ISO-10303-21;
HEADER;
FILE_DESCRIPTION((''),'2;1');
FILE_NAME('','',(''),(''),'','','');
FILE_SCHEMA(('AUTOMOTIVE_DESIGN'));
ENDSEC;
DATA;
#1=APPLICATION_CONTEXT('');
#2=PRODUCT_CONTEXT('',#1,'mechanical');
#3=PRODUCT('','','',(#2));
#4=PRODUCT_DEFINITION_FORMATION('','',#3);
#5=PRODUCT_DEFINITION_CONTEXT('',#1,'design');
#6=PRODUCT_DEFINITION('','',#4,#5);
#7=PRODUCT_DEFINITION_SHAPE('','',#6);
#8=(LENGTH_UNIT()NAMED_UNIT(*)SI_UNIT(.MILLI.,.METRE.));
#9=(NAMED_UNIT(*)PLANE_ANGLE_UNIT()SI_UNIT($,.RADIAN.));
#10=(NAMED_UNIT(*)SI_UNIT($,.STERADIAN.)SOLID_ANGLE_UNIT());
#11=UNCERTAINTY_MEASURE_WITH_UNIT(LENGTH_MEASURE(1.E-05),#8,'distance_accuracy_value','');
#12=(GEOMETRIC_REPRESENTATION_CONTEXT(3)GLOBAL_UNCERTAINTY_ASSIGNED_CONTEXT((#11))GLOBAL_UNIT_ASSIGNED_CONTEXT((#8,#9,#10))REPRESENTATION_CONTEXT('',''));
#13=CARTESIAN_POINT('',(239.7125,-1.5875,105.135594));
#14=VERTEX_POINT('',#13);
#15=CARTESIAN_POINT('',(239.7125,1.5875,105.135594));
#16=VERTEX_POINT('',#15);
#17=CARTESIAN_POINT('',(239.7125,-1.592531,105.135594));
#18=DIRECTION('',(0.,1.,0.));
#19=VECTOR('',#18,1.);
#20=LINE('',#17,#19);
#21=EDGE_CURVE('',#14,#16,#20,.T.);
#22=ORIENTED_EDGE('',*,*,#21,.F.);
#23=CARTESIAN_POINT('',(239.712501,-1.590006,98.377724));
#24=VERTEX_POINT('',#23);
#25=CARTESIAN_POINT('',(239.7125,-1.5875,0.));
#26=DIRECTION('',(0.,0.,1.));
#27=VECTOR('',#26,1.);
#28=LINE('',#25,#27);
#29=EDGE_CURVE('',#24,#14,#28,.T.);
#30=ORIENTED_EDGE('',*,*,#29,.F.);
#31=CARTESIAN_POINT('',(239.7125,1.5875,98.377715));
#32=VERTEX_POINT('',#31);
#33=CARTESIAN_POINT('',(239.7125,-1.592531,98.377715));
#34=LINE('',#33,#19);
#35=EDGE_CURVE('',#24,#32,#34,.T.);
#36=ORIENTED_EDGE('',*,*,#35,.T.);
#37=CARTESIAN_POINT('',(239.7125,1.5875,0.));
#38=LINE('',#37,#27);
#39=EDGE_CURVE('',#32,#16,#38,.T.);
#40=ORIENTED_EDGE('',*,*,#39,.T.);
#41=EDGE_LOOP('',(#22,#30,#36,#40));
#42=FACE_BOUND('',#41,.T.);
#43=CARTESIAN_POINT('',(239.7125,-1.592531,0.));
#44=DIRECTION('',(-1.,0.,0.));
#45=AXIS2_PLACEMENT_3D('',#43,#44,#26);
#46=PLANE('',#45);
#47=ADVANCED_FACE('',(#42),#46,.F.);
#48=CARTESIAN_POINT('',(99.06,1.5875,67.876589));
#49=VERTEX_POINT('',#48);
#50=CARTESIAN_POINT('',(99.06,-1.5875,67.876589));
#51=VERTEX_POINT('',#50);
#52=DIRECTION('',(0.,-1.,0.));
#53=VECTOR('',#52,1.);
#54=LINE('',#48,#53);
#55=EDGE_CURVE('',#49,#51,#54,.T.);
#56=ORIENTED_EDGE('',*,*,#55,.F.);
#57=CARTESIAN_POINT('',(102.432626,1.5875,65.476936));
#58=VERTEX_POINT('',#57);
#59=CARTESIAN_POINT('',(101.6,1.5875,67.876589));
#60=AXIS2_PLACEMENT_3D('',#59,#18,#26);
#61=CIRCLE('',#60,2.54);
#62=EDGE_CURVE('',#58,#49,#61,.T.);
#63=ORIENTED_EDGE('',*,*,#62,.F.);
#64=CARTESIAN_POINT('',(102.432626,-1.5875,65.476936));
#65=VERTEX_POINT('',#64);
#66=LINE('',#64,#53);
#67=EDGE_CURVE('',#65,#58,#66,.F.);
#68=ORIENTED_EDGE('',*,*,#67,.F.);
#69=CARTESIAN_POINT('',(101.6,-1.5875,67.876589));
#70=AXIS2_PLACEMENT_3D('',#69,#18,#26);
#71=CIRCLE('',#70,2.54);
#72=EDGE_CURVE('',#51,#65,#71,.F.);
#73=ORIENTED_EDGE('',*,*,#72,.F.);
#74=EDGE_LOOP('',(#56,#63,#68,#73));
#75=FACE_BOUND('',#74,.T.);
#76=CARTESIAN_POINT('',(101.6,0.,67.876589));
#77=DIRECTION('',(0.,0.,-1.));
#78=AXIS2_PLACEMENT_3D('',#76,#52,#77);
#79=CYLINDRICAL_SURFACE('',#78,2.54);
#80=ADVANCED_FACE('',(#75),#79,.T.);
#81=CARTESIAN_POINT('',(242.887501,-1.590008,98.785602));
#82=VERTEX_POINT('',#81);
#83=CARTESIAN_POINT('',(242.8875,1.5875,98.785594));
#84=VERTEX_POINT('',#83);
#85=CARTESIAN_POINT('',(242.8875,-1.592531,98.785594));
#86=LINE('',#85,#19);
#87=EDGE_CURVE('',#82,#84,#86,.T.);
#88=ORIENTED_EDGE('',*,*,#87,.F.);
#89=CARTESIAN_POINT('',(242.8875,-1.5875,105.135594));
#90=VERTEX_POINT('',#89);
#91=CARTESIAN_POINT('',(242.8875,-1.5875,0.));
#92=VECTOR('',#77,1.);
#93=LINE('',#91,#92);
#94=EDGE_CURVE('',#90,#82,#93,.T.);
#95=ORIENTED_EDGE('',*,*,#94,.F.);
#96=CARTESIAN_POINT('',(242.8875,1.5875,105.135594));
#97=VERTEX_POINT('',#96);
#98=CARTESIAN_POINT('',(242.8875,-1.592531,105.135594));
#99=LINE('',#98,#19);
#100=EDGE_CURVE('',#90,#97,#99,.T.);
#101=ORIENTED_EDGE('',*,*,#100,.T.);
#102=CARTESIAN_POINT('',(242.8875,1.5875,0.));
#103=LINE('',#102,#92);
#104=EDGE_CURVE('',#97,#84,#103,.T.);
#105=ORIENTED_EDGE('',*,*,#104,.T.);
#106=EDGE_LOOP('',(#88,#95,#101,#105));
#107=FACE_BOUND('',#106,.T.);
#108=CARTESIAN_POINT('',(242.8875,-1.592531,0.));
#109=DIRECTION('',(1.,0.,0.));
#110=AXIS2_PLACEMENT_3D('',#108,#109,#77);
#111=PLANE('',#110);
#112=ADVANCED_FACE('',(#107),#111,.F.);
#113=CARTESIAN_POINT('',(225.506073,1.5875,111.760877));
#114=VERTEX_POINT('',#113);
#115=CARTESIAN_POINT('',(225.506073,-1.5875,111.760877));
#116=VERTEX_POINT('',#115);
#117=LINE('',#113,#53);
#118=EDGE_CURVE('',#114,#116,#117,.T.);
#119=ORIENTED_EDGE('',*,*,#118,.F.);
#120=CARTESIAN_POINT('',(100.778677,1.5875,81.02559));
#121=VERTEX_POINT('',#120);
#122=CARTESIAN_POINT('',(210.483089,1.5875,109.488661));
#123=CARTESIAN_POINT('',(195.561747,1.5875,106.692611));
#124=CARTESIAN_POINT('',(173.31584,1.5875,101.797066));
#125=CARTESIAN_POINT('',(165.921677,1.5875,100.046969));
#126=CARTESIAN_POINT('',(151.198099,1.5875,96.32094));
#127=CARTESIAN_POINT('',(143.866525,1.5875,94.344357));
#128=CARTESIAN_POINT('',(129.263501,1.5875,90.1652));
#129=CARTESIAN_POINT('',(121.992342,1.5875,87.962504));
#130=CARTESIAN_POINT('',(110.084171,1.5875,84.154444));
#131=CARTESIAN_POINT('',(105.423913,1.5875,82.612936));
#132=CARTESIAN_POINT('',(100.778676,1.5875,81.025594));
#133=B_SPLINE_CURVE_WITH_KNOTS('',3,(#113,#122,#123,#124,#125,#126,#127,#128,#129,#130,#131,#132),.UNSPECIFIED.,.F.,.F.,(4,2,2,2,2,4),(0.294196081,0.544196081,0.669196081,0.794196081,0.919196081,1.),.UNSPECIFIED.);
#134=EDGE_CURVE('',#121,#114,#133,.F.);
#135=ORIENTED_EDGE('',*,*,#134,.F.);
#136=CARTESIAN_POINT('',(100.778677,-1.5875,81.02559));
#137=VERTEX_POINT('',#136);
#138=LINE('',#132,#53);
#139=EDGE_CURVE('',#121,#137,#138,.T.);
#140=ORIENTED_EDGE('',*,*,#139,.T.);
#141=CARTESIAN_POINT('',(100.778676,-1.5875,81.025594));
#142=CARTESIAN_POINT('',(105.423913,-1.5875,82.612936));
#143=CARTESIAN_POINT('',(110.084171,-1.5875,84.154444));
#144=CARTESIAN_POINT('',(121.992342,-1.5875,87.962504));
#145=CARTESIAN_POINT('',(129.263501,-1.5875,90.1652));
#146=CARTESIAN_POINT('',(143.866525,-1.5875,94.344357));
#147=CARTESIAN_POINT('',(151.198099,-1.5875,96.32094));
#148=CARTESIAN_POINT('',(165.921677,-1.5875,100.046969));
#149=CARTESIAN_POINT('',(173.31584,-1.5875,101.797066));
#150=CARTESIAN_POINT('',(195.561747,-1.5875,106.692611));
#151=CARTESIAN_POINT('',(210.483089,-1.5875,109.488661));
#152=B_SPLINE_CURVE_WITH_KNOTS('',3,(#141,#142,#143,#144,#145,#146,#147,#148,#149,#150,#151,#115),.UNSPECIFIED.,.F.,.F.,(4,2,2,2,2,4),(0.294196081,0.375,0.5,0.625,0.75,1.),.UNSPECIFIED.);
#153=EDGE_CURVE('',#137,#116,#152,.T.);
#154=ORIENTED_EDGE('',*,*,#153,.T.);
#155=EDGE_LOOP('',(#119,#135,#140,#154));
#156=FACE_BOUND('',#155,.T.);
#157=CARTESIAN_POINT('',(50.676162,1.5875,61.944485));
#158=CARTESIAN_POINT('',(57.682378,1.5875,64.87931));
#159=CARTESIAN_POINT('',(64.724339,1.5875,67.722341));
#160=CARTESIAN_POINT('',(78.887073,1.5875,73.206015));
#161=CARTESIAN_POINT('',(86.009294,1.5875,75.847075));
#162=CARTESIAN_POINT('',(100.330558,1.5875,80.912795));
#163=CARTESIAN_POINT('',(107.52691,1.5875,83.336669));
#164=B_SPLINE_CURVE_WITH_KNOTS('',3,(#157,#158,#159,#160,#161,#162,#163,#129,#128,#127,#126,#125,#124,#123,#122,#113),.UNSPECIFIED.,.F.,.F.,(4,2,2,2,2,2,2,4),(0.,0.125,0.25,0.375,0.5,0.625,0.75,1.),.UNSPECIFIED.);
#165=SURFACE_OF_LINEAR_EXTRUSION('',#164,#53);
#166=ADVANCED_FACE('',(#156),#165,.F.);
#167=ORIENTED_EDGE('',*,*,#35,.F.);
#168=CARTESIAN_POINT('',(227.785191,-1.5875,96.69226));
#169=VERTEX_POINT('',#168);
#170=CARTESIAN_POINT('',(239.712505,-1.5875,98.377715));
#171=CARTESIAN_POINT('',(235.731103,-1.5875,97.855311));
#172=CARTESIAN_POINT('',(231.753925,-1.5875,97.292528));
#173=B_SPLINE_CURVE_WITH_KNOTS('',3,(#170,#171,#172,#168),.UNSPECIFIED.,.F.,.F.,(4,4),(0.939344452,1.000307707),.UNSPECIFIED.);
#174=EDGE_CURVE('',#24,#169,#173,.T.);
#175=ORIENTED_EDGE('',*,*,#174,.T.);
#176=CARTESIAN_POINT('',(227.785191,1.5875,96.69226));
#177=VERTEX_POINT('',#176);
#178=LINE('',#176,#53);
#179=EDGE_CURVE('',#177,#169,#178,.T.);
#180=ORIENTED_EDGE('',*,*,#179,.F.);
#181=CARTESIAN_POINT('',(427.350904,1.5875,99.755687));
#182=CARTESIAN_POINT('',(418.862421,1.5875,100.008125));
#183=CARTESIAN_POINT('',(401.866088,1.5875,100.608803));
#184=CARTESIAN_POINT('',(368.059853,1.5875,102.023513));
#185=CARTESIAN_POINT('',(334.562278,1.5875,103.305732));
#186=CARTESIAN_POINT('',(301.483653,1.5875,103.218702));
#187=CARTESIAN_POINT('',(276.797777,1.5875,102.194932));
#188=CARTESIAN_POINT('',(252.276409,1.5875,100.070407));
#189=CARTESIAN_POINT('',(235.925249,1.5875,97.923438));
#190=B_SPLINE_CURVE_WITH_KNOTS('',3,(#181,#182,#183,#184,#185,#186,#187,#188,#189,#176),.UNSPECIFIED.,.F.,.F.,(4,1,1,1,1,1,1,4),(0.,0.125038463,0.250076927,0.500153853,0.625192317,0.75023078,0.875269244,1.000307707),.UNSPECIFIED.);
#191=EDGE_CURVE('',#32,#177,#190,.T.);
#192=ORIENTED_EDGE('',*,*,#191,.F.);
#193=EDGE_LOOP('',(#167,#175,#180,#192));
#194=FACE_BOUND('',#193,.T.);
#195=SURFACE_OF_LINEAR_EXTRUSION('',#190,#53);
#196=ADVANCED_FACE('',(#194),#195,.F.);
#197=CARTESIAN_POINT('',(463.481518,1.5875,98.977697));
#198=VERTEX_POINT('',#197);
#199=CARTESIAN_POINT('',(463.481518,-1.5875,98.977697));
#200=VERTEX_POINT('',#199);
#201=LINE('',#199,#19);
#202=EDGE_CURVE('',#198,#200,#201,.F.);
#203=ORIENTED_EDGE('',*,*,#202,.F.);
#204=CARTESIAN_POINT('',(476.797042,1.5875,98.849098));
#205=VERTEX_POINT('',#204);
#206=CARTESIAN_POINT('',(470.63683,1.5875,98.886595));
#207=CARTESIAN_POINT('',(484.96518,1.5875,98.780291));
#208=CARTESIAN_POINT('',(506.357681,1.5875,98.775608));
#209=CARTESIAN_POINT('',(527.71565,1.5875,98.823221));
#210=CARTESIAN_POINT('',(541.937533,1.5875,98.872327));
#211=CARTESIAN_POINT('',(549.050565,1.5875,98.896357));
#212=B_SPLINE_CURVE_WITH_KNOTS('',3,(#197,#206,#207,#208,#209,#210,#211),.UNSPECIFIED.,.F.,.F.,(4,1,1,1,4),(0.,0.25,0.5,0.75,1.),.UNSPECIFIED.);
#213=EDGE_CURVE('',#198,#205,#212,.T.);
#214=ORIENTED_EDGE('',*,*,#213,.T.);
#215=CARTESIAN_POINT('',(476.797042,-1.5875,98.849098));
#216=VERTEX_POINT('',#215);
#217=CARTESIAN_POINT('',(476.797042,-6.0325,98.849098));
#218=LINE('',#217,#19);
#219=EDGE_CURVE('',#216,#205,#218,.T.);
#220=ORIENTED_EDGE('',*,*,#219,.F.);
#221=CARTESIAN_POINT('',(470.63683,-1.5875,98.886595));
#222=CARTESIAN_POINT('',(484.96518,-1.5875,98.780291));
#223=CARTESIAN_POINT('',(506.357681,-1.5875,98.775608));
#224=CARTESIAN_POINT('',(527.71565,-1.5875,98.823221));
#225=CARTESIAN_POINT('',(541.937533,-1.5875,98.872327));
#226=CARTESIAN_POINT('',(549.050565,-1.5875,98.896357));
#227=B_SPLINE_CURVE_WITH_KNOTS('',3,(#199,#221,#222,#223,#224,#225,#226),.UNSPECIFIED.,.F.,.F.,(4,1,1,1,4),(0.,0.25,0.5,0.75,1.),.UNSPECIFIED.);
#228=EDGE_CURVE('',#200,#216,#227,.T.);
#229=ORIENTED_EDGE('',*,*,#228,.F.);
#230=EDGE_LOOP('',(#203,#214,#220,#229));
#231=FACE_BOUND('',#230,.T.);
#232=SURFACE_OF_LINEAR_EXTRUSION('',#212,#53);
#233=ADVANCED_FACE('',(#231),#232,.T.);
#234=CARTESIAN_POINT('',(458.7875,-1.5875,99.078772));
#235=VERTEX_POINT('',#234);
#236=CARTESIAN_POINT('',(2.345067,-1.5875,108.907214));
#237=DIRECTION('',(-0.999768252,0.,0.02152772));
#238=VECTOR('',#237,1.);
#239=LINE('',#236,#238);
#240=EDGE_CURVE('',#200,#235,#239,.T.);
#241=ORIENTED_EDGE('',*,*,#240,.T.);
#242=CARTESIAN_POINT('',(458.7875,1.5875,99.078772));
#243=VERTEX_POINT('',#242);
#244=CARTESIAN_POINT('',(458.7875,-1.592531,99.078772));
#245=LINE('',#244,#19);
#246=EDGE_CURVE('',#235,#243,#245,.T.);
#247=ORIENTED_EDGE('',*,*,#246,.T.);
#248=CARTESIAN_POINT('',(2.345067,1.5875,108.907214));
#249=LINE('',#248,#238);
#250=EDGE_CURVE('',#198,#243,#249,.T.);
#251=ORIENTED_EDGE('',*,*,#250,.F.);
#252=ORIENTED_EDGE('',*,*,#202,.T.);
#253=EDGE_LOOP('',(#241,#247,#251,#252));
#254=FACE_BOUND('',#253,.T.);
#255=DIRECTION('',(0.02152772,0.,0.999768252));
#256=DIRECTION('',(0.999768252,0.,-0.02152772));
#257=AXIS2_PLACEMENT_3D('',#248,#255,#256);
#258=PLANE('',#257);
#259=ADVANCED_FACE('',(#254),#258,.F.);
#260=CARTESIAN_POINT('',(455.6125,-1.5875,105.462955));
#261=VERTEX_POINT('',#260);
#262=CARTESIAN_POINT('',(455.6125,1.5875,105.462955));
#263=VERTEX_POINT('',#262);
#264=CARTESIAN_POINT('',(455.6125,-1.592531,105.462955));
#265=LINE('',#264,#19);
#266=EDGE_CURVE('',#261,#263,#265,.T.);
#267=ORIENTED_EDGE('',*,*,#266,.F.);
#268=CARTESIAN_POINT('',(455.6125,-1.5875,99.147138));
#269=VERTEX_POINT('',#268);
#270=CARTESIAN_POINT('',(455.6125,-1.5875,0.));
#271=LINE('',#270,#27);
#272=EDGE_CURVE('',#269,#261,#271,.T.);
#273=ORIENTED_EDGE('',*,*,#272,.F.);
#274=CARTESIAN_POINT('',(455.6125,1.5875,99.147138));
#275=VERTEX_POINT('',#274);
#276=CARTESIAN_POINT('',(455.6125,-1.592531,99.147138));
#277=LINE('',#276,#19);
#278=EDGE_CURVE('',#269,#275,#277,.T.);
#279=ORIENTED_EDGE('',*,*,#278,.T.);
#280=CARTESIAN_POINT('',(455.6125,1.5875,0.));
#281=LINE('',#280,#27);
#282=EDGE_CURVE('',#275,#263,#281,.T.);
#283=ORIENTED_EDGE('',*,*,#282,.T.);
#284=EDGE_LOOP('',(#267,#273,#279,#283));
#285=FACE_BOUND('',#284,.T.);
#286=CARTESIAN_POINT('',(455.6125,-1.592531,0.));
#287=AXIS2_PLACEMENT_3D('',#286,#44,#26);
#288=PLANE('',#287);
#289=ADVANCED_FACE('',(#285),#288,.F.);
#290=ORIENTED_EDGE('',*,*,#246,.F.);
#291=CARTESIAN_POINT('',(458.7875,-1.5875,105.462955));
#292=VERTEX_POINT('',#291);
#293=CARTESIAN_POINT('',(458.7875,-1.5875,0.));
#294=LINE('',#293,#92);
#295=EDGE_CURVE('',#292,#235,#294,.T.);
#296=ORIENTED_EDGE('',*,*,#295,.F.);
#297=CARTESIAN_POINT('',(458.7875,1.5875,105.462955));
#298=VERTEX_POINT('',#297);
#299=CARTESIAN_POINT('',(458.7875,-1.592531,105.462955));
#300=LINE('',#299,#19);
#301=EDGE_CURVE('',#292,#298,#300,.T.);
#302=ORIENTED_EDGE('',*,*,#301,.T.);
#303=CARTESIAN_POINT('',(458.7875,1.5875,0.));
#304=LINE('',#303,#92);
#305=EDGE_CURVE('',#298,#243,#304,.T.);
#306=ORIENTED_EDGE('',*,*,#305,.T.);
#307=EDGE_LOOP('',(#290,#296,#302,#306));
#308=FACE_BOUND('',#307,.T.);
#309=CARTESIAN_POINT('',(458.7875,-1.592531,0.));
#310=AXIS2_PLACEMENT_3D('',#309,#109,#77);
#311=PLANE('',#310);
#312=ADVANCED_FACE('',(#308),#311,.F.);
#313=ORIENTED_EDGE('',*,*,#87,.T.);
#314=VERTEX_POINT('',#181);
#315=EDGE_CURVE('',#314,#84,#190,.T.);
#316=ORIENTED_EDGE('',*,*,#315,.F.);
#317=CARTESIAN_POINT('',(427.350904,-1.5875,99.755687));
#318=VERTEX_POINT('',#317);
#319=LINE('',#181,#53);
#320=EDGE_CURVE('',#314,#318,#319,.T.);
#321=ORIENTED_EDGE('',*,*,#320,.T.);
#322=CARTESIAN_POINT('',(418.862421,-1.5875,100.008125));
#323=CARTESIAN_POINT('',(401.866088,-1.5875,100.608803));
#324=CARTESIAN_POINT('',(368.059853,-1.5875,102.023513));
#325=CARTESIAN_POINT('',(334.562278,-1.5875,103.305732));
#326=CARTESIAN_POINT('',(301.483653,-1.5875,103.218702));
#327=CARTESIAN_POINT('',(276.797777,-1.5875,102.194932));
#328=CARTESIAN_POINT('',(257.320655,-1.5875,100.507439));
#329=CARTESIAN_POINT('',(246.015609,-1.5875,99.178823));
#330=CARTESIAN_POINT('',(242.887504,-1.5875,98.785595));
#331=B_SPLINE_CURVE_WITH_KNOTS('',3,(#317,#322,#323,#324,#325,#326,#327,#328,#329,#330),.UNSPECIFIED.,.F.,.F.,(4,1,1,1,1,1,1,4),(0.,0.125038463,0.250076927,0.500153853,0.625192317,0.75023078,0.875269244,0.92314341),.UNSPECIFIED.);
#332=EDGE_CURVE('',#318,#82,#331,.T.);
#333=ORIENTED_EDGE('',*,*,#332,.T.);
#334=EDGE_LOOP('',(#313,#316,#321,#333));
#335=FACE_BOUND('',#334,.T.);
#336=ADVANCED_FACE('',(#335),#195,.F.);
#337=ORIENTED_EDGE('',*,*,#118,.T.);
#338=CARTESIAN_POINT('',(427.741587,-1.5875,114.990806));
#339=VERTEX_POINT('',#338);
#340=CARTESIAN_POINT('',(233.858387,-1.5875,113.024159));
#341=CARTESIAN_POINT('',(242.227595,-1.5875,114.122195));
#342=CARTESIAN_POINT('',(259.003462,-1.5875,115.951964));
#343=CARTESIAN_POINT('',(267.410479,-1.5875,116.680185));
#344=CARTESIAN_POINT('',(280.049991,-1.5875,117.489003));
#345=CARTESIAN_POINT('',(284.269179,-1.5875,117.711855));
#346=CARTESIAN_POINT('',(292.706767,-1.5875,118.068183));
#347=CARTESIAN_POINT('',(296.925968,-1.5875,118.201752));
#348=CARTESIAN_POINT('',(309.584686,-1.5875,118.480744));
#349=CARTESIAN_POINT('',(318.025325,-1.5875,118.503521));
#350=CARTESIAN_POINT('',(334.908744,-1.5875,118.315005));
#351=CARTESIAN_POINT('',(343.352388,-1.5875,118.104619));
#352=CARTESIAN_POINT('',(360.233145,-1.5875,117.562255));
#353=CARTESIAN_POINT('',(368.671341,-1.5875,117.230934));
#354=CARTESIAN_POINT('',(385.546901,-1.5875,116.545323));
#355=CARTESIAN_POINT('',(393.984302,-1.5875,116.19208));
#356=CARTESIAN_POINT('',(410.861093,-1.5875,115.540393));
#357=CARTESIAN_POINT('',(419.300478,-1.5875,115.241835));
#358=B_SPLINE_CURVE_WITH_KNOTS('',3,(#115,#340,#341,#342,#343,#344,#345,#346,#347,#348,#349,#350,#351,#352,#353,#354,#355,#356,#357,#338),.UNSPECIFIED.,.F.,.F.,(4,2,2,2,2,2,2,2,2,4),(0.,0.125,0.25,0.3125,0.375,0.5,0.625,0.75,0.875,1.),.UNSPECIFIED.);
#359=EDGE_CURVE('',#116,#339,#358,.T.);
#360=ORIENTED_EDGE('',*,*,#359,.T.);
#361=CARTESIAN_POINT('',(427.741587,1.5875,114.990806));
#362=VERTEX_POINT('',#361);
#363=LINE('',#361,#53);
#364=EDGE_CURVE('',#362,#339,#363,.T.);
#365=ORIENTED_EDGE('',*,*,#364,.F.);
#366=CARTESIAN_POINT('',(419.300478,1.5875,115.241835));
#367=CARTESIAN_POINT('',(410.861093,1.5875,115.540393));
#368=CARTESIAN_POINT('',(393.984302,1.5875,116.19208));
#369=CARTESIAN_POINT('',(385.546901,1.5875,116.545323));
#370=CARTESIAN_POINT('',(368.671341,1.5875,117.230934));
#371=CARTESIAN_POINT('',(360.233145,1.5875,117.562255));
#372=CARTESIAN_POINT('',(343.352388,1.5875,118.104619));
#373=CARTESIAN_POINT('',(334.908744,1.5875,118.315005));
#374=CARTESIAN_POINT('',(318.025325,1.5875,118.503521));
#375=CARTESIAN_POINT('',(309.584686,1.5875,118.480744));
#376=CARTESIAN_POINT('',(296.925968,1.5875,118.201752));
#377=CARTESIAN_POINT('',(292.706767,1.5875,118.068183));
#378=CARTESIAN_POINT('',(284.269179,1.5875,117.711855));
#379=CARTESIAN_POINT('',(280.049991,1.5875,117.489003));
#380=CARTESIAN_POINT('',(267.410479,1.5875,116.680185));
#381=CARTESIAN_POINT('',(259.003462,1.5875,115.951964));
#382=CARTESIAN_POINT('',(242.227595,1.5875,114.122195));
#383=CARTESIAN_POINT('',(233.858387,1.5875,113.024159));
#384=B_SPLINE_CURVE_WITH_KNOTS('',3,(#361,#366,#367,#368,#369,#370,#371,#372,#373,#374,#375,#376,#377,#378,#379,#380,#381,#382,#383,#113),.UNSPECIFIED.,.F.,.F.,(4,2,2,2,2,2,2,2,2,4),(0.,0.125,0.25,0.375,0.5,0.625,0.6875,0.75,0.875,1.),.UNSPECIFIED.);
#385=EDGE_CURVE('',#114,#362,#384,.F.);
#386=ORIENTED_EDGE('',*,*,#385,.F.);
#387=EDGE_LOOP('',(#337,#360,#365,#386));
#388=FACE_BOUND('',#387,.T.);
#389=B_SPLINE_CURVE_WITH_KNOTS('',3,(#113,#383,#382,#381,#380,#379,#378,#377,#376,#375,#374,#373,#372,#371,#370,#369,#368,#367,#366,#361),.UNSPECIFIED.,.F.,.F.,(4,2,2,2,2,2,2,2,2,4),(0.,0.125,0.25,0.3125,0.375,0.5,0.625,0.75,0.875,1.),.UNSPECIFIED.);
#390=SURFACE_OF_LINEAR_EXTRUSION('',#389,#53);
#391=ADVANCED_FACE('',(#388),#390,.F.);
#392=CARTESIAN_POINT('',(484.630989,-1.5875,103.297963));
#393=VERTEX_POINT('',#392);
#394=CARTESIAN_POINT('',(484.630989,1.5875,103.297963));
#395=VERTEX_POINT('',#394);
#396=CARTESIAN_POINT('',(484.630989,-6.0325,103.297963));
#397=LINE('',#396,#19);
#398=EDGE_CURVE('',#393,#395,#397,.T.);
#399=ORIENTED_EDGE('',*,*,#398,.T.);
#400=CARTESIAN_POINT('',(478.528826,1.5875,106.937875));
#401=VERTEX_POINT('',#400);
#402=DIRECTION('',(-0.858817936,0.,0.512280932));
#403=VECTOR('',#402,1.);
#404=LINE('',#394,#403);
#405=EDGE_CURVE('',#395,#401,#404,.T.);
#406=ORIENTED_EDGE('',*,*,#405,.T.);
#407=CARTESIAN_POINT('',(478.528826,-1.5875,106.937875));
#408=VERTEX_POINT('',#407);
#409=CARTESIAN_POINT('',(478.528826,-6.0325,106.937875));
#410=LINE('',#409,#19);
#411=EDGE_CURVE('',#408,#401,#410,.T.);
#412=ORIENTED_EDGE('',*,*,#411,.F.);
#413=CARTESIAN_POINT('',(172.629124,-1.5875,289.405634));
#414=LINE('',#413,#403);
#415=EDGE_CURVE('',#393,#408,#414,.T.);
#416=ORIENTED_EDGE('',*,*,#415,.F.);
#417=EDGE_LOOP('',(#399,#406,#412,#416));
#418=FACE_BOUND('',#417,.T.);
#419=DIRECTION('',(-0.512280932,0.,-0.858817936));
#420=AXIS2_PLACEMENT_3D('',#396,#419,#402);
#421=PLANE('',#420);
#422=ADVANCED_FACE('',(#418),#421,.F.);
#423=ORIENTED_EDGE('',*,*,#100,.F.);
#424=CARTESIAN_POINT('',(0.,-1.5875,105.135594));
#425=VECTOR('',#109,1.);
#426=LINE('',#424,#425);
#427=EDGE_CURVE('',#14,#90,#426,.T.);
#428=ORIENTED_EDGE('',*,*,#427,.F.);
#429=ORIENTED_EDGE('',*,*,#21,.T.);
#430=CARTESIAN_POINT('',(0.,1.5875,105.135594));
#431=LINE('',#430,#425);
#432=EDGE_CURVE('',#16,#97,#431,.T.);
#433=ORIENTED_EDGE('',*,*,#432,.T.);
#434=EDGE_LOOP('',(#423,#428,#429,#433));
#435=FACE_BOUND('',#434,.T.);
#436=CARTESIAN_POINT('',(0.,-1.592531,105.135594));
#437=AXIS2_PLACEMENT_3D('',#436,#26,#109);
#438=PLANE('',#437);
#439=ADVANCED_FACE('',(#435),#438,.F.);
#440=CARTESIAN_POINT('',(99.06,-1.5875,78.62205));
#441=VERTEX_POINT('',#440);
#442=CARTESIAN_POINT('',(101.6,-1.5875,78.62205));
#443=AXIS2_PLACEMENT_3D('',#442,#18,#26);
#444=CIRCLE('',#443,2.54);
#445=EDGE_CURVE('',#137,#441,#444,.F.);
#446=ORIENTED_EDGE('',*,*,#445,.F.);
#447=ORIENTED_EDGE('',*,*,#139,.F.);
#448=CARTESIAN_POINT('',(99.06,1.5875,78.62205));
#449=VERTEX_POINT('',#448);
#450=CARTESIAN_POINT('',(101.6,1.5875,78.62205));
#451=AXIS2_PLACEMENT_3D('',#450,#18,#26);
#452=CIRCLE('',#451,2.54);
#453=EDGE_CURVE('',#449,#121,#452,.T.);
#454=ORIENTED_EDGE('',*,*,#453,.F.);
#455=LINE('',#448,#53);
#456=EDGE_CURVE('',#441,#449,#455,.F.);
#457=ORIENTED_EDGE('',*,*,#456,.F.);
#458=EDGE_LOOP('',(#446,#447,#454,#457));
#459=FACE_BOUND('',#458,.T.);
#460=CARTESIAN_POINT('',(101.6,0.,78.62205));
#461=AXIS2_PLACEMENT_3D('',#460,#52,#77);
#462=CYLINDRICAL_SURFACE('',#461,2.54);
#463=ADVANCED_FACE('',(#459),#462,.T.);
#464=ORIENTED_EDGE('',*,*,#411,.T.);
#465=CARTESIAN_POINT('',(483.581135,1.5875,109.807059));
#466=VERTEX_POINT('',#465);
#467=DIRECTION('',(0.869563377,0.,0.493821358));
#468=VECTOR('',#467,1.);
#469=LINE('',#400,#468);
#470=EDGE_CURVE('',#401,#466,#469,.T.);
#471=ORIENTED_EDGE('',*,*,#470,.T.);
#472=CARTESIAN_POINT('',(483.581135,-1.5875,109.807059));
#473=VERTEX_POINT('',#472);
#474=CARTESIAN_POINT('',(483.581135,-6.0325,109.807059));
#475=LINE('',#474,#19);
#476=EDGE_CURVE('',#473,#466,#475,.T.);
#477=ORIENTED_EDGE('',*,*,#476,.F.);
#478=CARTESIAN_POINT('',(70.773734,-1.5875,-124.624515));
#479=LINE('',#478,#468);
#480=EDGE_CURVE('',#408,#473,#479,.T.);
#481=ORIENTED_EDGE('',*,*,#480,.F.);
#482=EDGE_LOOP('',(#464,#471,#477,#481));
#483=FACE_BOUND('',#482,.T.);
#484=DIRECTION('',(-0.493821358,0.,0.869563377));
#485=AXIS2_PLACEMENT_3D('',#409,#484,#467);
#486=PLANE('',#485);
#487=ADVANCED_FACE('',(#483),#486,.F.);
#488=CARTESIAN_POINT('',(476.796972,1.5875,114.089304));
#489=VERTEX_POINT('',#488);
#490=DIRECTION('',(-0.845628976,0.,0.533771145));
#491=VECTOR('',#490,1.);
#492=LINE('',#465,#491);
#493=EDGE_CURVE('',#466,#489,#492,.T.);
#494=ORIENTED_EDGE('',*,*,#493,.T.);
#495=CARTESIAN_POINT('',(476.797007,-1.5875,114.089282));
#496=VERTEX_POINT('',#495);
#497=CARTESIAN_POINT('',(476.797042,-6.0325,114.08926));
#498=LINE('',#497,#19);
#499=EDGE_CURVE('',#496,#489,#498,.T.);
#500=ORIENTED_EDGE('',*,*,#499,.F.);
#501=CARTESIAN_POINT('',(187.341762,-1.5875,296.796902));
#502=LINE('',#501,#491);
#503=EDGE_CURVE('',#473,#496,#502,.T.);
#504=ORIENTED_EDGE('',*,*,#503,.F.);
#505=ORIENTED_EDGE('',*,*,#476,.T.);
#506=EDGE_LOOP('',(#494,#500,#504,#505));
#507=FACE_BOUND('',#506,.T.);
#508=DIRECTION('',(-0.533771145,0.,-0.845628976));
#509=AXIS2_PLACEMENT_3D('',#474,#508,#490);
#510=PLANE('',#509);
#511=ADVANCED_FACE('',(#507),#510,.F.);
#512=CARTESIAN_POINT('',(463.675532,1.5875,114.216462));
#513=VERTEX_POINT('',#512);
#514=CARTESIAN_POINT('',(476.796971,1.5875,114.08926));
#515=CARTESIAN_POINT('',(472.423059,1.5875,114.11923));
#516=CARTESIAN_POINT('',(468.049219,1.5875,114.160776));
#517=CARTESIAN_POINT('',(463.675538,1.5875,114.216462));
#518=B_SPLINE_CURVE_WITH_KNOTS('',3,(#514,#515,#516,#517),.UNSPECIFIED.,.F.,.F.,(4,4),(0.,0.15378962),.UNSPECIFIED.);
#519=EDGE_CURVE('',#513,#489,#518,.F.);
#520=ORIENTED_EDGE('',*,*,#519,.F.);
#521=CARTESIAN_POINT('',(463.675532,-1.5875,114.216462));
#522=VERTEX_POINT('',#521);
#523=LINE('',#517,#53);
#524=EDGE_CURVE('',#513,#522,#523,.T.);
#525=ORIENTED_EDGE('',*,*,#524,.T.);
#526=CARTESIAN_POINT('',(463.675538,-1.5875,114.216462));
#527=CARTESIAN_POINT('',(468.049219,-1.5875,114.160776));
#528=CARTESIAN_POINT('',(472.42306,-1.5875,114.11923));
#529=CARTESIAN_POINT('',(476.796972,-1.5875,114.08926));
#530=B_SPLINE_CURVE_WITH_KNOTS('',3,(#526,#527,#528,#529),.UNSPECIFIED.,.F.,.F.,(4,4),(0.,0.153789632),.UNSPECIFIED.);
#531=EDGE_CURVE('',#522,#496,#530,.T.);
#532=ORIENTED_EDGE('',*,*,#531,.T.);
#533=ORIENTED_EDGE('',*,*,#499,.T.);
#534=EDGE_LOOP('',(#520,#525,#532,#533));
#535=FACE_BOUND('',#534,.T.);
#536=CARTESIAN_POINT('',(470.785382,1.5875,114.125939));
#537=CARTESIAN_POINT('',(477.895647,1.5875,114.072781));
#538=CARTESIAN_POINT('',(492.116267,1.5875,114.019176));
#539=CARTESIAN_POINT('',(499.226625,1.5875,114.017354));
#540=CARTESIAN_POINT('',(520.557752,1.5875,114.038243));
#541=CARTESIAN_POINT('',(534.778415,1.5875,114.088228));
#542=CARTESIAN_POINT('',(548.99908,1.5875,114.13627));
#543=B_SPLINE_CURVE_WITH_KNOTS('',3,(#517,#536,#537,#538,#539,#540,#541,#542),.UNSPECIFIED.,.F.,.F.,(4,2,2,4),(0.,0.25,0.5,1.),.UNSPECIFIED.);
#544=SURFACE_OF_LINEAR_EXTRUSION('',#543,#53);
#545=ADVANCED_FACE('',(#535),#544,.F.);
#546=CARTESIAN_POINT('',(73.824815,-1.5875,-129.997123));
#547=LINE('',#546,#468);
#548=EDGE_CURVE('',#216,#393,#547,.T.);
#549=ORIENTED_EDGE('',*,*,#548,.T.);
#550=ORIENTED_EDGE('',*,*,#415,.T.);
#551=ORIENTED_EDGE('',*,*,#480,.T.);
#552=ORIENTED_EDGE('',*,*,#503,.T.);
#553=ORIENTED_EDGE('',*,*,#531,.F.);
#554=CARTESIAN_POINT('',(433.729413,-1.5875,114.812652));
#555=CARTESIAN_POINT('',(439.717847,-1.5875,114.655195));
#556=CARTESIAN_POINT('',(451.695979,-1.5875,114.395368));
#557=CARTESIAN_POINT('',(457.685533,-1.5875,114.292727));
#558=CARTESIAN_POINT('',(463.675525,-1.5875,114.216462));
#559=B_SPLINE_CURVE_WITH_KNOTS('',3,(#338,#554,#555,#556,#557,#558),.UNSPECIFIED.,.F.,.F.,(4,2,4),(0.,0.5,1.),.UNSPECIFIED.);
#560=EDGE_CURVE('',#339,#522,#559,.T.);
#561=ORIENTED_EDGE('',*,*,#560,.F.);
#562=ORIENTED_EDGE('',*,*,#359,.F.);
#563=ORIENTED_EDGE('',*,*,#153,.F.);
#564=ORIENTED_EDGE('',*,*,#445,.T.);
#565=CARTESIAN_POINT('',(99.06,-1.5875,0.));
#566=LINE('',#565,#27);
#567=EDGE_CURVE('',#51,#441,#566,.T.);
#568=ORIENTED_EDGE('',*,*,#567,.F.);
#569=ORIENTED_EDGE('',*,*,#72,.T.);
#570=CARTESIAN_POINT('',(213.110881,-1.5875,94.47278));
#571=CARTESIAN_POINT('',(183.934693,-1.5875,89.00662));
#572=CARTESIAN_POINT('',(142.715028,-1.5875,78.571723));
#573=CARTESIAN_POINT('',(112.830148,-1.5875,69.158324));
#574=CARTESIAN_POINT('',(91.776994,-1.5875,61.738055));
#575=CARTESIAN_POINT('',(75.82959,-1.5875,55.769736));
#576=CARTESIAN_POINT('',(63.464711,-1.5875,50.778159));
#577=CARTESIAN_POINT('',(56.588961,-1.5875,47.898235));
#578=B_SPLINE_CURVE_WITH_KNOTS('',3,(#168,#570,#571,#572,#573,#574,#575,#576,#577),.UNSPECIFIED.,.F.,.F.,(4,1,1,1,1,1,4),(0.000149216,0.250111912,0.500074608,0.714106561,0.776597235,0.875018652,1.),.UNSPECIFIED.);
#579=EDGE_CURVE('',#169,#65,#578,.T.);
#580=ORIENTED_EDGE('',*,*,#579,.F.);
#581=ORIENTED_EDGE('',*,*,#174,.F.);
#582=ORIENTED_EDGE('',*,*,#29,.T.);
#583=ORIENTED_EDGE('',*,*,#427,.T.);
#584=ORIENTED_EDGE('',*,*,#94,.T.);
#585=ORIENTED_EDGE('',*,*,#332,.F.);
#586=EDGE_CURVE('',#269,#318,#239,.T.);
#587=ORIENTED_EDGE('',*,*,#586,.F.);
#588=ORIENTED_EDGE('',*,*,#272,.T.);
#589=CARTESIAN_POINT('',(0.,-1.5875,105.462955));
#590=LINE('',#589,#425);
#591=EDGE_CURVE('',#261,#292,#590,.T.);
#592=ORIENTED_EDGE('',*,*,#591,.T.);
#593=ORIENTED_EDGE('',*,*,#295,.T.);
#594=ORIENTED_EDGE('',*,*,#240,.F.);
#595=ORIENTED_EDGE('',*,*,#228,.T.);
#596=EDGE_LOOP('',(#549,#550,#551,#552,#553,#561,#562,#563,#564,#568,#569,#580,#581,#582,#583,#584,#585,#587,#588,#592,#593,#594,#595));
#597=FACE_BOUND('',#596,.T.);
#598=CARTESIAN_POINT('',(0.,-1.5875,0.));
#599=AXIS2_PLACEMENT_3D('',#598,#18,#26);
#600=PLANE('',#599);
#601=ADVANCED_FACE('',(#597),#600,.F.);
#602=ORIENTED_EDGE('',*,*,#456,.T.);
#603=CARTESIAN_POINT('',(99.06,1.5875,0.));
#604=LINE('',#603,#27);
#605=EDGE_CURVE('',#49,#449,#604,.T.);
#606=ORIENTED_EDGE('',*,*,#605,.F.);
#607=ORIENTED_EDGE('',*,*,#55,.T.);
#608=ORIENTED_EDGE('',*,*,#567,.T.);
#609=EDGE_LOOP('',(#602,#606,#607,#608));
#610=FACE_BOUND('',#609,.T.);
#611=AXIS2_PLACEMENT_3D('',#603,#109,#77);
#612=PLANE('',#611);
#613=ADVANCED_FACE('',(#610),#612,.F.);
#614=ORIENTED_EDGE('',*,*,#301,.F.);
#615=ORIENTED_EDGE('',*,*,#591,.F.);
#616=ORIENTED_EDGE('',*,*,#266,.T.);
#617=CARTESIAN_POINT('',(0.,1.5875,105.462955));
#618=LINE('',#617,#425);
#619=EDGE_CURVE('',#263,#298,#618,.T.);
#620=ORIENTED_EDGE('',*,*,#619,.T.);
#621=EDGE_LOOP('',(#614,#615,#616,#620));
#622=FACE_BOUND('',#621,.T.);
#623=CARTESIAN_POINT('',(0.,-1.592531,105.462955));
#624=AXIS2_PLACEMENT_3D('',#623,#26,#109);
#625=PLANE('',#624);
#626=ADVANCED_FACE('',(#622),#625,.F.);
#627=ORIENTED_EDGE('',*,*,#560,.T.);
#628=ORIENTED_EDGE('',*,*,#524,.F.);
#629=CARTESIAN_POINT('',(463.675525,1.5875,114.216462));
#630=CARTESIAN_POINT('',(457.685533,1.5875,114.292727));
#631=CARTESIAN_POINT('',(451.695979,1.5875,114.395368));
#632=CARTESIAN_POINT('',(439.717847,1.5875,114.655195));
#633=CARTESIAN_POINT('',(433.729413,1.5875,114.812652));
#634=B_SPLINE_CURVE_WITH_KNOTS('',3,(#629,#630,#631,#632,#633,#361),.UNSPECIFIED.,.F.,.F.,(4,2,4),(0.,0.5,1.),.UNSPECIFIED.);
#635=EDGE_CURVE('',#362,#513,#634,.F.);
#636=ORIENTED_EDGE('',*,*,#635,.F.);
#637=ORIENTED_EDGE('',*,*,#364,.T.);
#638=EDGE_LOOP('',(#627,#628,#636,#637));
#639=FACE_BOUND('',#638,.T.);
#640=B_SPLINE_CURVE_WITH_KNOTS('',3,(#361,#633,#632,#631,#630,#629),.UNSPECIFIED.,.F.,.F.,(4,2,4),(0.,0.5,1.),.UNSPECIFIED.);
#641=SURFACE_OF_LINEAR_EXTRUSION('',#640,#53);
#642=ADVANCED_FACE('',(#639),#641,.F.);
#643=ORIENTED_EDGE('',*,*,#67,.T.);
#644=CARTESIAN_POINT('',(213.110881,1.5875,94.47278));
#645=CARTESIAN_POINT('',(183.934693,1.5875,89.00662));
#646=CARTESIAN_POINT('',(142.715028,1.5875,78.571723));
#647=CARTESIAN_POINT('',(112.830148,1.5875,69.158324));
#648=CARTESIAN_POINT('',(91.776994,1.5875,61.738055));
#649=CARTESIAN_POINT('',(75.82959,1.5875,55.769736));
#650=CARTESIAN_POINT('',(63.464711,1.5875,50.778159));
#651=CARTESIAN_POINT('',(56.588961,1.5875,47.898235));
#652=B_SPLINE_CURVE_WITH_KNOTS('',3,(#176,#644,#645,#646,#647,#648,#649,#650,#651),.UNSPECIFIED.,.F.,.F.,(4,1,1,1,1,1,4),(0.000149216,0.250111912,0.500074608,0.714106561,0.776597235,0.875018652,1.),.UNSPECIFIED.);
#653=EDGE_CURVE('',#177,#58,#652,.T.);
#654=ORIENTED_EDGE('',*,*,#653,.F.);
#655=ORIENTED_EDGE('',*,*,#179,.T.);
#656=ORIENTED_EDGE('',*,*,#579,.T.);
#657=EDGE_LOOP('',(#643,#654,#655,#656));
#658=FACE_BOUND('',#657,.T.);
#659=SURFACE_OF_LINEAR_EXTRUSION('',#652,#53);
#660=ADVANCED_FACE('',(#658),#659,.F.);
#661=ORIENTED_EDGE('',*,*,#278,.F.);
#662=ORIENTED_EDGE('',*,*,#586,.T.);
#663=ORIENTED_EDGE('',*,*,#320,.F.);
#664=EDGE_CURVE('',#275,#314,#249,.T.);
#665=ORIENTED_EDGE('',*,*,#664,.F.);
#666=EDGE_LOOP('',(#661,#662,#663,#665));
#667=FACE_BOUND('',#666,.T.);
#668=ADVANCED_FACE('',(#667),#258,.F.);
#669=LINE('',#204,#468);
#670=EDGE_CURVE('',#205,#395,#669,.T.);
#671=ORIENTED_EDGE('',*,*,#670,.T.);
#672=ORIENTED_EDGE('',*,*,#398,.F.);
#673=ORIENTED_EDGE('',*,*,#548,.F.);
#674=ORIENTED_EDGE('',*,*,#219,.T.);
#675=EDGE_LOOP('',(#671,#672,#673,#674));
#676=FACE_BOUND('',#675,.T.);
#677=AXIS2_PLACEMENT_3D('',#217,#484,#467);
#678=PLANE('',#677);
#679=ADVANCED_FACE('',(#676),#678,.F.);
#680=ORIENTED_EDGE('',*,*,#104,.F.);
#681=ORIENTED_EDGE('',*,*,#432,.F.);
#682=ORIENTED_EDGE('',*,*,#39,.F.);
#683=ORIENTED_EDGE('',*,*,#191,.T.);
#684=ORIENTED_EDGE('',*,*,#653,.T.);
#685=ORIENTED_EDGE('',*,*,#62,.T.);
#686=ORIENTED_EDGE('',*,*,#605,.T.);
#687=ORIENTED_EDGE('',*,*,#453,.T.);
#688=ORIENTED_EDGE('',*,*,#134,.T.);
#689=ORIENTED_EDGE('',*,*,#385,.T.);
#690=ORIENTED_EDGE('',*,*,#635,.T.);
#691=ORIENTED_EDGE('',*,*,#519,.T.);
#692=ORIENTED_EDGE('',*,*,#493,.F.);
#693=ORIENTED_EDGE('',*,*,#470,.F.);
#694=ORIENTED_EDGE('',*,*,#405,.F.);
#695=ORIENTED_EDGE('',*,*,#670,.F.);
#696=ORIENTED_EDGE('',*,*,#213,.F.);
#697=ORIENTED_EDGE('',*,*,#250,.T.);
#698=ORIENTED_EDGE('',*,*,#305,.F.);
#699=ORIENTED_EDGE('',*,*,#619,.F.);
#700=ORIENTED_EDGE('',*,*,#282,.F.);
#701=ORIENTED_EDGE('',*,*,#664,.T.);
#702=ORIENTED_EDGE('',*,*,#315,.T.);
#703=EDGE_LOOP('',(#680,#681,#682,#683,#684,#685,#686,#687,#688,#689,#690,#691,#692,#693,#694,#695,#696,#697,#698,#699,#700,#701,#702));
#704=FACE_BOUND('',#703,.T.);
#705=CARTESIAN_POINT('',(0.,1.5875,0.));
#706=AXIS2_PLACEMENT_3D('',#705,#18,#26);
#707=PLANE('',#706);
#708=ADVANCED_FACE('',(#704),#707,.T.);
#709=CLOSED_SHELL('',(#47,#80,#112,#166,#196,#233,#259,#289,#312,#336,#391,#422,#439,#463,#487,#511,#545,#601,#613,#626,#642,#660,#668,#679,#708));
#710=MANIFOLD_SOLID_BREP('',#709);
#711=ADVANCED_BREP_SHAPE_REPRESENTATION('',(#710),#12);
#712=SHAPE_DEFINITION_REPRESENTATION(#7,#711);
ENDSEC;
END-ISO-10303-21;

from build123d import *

# Parameters (mm, degrees)
BOSS_EXTRUDE1_START = -1.5875
BOSS_EXTRUDE1_DEPTH = 3.175
FILLET1_R           = 2.54
CUT_EXTRUDE1_DEPTH  = 2673.169061301
CUT_EXTRUDE2_DEPTH  = 7.62


with BuildPart() as part:
    # Boss-Extrude1: read off the stored shape, not the designer's step
    # Boss-Extrude1 outline → Boss-Extrude1 (new body)
    with BuildSketch(Plane(origin=(0, 0, 0), x_dir=(1, 0, 0), z_dir=(0, 1, 0)).offset(BOSS_EXTRUDE1_START)):
        with BuildLine():
            Line((463.481517793, -98.977696854), (427.350904327, -99.755686873))
            add(Edge.make_bspline(
                [(427.350904327, -99.755686873), (418.862421221, -100.008124614), (401.866088129, -100.608803357), (368.059852939, -102.023512545), (334.562278265, -103.305731984), (301.483653152, -103.218702016), (276.797777307, -102.194932027), (252.27640901, -100.070407207), (235.925248591, -97.923437961), (227.785190572, -96.692259941)],
                knots=[0, 0, 0, 0, 0.125038463, 0.250076927, 0.500153853, 0.625192317, 0.75023078, 0.875269244, 1.000307707, 1.000307707, 1.000307707, 1.000307707], degree=3))
            add(Edge.make_bspline(
                [(227.785190572, -96.692259941), (213.110880299, -94.472780138), (183.93469275, -89.006619914), (142.715027592, -78.571723038), (114.603726318, -69.716981467), (100.814391379, -64.915814298), (99.06, -64.297537836)],
                knots=[0.00014922, 0.00014922, 0.00014922, 0.00014922, 0.250111912, 0.500074608, 0.714106561, 0.745351898, 0.745351898, 0.745351898, 0.745351898], degree=3))
            Line((99.06, -64.297537836), (99.06, -80.435972635))
            add(Edge.make_bspline(
                [(99.06, -80.435972635), (104.274196502, -82.231853296), (109.507322686, -83.96997604), (121.992341978, -87.962504163), (129.263501237, -90.165200397), (143.866524863, -94.34435671), (151.19809916, -96.320939574), (165.92167747, -100.046969279), (173.315840114, -101.797066047), (195.561746525, -106.69261065), (210.48308935, -109.488660696), (225.506072884, -111.760877083)],
                knots=[0.284226648, 0.284226648, 0.284226648, 0.284226648, 0.375, 0.375, 0.5, 0.5, 0.625, 0.625, 0.75, 0.75, 1, 1, 1, 1], degree=3))
            add(Edge.make_bspline(
                [(225.506072884, -111.760877083), (233.858386736, -113.024158647), (242.227594967, -114.122194791), (259.003461577, -115.951963882), (267.410478961, -116.68018536), (280.049991072, -117.489002615), (284.26917928, -117.711854611), (292.706766588, -118.068182791), (296.925968196, -118.20175247), (309.584686499, -118.480744306), (318.025325165, -118.503521129), (334.908743785, -118.315005384), (343.352388312, -118.104618683), (360.233144502, -117.562255384), (368.671341038, -117.230934371), (385.546900881, -116.545322545), (393.984302215, -116.19208005), (410.861092672, -115.540392758), (419.300477696, -115.241834951), (427.741586833, -114.990806057)],
                knots=[0, 0, 0, 0, 0.125, 0.125, 0.25, 0.25, 0.3125, 0.3125, 0.375, 0.375, 0.5, 0.5, 0.625, 0.625, 0.75, 0.75, 0.875, 0.875, 1, 1, 1, 1], degree=3))
            add(Edge.make_bspline(
                [(427.741586833, -114.990806057), (433.729413487, -114.812652177), (439.717847223, -114.655194797), (451.695979443, -114.3953683), (457.68553345, -114.292726521), (463.675525417, -114.216461911)],
                knots=[0, 0, 0, 0, 0.5, 0.5, 1, 1, 1, 1], degree=3))
            add(Edge.make_bspline(
                [(463.675525417, -114.216461911), (470.785382475, -114.125939241), (477.895647472, -114.072781143), (492.116266715, -114.019175519), (499.226625181, -114.01735353), (520.557752109, -114.03824298), (534.778415195, -114.088228036), (548.999079931, -114.136269744)],
                knots=[0, 0, 0, 0, 0.25, 0.25, 0.5, 0.5, 1, 1, 1, 1], degree=3))
            add(Edge.make_bspline(
                [(548.999079931, -114.136269744), (560.220276672, -114.174178365), (571.441476667, -114.211622104), (593.883924596, -114.268599335), (605.105170909, -114.288269821), (616.326429146, -114.296606155)],
                knots=[0, 0, 0, 0, 0.5, 0.5, 1, 1, 1, 1], degree=3))
            add(Edge.make_bspline(
                [(616.326429146, -114.296606155), (632.04621738, -114.30828436), (647.765968153, -114.296774394), (679.205420393, -114.24323397), (694.925123067, -114.201950933), (726.364532125, -114.121681347), (742.0842434, -114.083543006), (773.523671883, -114.034083389), (789.243390213, -114.023396076), (820.682831325, -114.017303041), (836.402553623, -114.020240225), (867.841997843, -114.024821457), (883.561720422, -114.028722489), (915.001165911, -114.037662965), (930.720888645, -114.04209584), (962.160332218, -114.044456393), (977.880053631, -114.042025852), (1025.039240625, -114.026352661), (1056.478726331, -114.00108124), (1103.637743706, -114.076141518), (1119.357382012, -114.119430037), (1150.796589716, -114.242868384), (1166.516159417, -114.322855573), (1213.674806337, -114.596079867), (1245.113813814, -114.824335418), (1307.992068737, -115.160349225), (1339.431327838, -115.26277592), (1386.59071759, -115.166774968), (1402.310597754, -115.093136109), (1433.750539713, -114.855373393), (1449.469718126, -114.691491377), (1480.905247202, -114.282993413), (1496.621842734, -114.038617844), (1528.053234249, -113.488096449), (1543.768039181, -113.182257797), (1590.910126723, -112.184857954), (1622.335087164, -111.41358735), (1685.180622448, -109.720508747), (1716.601206009, -108.799000008), (1779.439542968, -106.858836008), (1810.857304519, -105.840460628), (1873.691027846, -103.741931839), (1905.106997705, -102.662055888), (1967.937400908, -100.449562537), (1999.351842263, -99.317220068), (2062.178442698, -96.974195187), (2093.59060921, -95.763767813), (2125.000640174, -94.480036945)],
                knots=[0, 0, 0, 0, 0.03125, 0.03125, 0.0625, 0.0625, 0.09375, 0.09375, 0.125, 0.125, 0.15625, 0.15625, 0.1875, 0.1875, 0.21875, 0.21875, 0.25, 0.25, 0.3125, 0.3125, 0.34375, 0.34375, 0.375, 0.375, 0.4375, 0.4375, 0.5, 0.5, 0.53125, 0.53125, 0.5625, 0.5625, 0.59375, 0.59375, 0.625, 0.625, 0.6875, 0.6875, 0.75, 0.75, 0.8125, 0.8125, 0.875, 0.875, 0.9375, 0.9375, 1, 1, 1, 1], degree=3))
            add(Edge.make_bspline(
                [(2125.000640174, -94.480036945), (2149.043512053, -93.497408198), (2173.084656935, -92.471430319), (2221.160511116, -90.282545134), (2245.195534081, -89.119655168), (2281.239757247, -87.221357571), (2293.253026932, -86.562238774), (2317.276292873, -85.185372522), (2329.286674963, -84.469587706), (2353.300431949, -82.936097691), (2365.303298861, -82.116745479), (2389.295700221, -80.303201383), (2401.285131688, -79.307659014), (2425.248015539, -77.107027292), (2437.219395044, -75.902126229), (2461.135042925, -73.272860721), (2473.08021873, -71.848649744), (2496.945889729, -68.786405154), (2508.867210067, -67.148439822), (2532.676751502, -63.675594501), (2544.566194734, -61.840767768), (2568.317359069, -57.993135306), (2580.179611266, -55.980432347), (2603.876576666, -51.794563265), (2615.710909808, -49.621694996), (2639.350360155, -45.125086501), (2651.156219503, -42.80151333), (2665.144217076, -39.951429742), (2667.342402296, -39.500717262), (2669.54, -39.047177022)],
                knots=[0, 0, 0, 0, 0.125, 0.125, 0.25, 0.25, 0.3125, 0.3125, 0.375, 0.375, 0.4375, 0.4375, 0.5, 0.5, 0.5625, 0.5625, 0.625, 0.625, 0.6875, 0.6875, 0.75, 0.75, 0.8125, 0.8125, 0.875, 0.875, 0.9375, 0.9375, 0.949156536, 0.949156536, 0.949156536, 0.949156536], degree=3))
            Line((2669.54, -39.047177022), (2669.54, -23.48404926))
            add(Edge.make_bspline(
                [(2124.378303089, -79.252749053), (2148.397511932, -78.271087411), (2196.441425914, -76.220230463), (2256.436326715, -73.319302978), (2304.39682767, -70.686853716), (2340.342003366, -68.544044046), (2376.169099534, -66.099901772), (2423.792254479, -62.148433447), (2483.117302519, -55.632651017), (2554.044456911, -45.226530814), (2611.906127764, -34.972755606), (2648.229540612, -27.845365737), (2663.16372025, -24.802445768), (2667.415112986, -23.925290392), (2669.54, -23.48404926)],
                knots=[0, 0, 0, 0, 0.125, 0.25, 0.3125, 0.375, 0.4375, 0.5, 0.625, 0.75, 0.875, 0.931953524, 0.943294604, 0.954635683, 0.954635683, 0.954635683, 0.954635683], degree=3))
            add(Edge.make_bspline(
                [(616.337750913, -99.056610361), (647.760496601, -99.079954266), (694.870680343, -98.960929783), (757.779786959, -98.804063039), (820.690458186, -98.765348433), (899.289299877, -98.796796583), (993.586772551, -98.812914928), (1087.931915928, -98.732357487), (1182.339530793, -99.124499499), (1276.653980681, -99.814761199), (1370.850831485, -100.131815232), (1464.98207814, -99.410819046), (1590.549452681, -97.151170263), (1747.540081264, -92.783387293), (1904.580584785, -87.479552507), (2030.204554218, -82.955875899), (2092.987058489, -80.535712121), (2124.378303089, -79.252749053)],
                knots=[0, 0, 0, 0, 0.0625, 0.09375, 0.125, 0.1875, 0.25, 0.3125, 0.375, 0.4375, 0.5, 0.5625, 0.625, 0.75, 0.875, 0.9375, 1, 1, 1, 1], degree=3))
            add(Edge.make_bspline(
                [(549.050564999, -98.89635671), (554.659992113, -98.915307063), (565.880376817, -98.952985098), (582.701799226, -99.002380959), (599.520778593, -99.038450073), (610.731968981, -99.052445795), (616.337750913, -99.056610361)],
                knots=[0, 0, 0, 0, 0.25, 0.5, 0.75, 1, 1, 1, 1], degree=3))
            add(Edge.make_bspline(
                [(463.481517793, -98.977696854), (470.636830327, -98.886595426), (484.965179859, -98.780290974), (506.357680509, -98.775608099), (527.715649674, -98.823220556), (541.937533288, -98.872326737), (549.050564999, -98.89635671)],
                knots=[0, 0, 0, 0, 0.25, 0.5, 0.75, 1, 1, 1, 1], degree=3))
        make_face()
    extrude(amount=BOSS_EXTRUDE1_DEPTH)

    # Fillet1
    fillet1_edges = [part.edges().sort_by_distance(p)[0] for p in [
        (2669.54, 0, 39.047177022),
        (2669.54, 0, 23.48404926),
        (99.06, 0, 64.297537836),
        (99.06, 0, 80.435972635),
    ]]
    fillet(fillet1_edges, radius=FILLET1_R)

    # Sketch2 → Cut-Extrude1 (cut, through all)
    with BuildSketch(Plane(origin=(0, 1.5875, 0), x_dir=(1, 0, 0), z_dir=(0, 1, 0))):
        Polygon((458.7875, -99.078771778), (455.6125, -99.147138132), (455.6125, -105.462954955), (458.7875, -105.462954955), align=None)
        with BuildLine():
            Line((2487.6125, -54.614044682), (2487.6125, -60.756097975))
            Line((2487.6125, -60.756097975), (2490.7875, -60.756097975))
            Line((2490.7875, -60.756097975), (2490.7875, -54.196862137))
            add(Edge.make_bspline(
                [(2490.7875, -54.196862137), (2489.72925344, -54.336769839), (2488.670920227, -54.475833001), (2487.6125, -54.614044682)],
                knots=[0.635778938, 0.635778938, 0.635778938, 0.635778938, 0.641365892, 0.641365892, 0.641365892, 0.641365892], degree=3))
        make_face()
        with BuildLine():
            Line((2309.8125, -70.346479383), (2309.8125, -75.33420721))
            Line((2309.8125, -75.33420721), (2312.9875, -75.33420721))
            Line((2312.9875, -75.33420721), (2312.9875, -70.161551132))
            add(Edge.make_bspline(
                [(2312.9875, -70.161551132), (2311.929224732, -70.223449083), (2310.870887845, -70.285086749), (2309.8125, -70.346479383)],
                knots=[0.324680898, 0.324680898, 0.324680898, 0.324680898, 0.330200553, 0.330200553, 0.330200553, 0.330200553], degree=3))
        make_face()
        with BuildLine():
            Line((2132.0125, -78.939241639), (2132.0125, -85.223663793))
            Line((2132.0125, -85.223663793), (2135.1875, -85.223663793))
            Line((2135.1875, -85.223663793), (2135.1875, -78.807949765))
            add(Edge.make_bspline(
                [(2135.1875, -78.807949765), (2134.129165205, -78.851804918), (2133.070831452, -78.8955682), (2132.0125, -78.939241639)],
                knots=[0.015996912, 0.015996912, 0.015996912, 0.015996912, 0.021504552, 0.021504552, 0.021504552, 0.021504552], degree=3))
        make_face()
        with BuildLine():
            Line((2005.0125, -83.846915394), (2005.0125, -90.138723071))
            Line((2005.0125, -90.138723071), (2008.1875, -90.138723071))
            Line((2008.1875, -90.138723071), (2008.1875, -83.730469865))
            add(Edge.make_bspline(
                [(2008.1875, -83.730469865), (2007.129173184, -83.769325496), (2006.070839765, -83.808140465), (2005.0125, -83.846915394)],
                knots=[0.921843858, 0.921843858, 0.921843858, 0.921843858, 0.923950286, 0.923950286, 0.923950286, 0.923950286], degree=3))
        make_face()
        with BuildLine():
            Line((1827.2125, -90.049540749), (1827.2125, -96.347044402))
            Line((1827.2125, -96.347044402), (1830.3875, -96.347044402))
            Line((1830.3875, -96.347044402), (1830.3875, -89.944485596))
            add(Edge.make_bspline(
                [(1830.3875, -89.944485596), (1829.32916541, -89.979545586), (1828.270832057, -90.01456412), (1827.2125, -90.049540749)],
                knots=[0.803899516, 0.803899516, 0.803899516, 0.803899516, 0.806005654, 0.806005654, 0.806005654, 0.806005654], degree=3))
        make_face()
        with BuildLine():
            Line((1649.4125, -95.434799369), (1649.4125, -101.74230383))
            Line((1649.4125, -101.74230383), (1652.5875, -101.74230383))
            Line((1652.5875, -101.74230383), (1652.5875, -95.349679657))
            add(Edge.make_bspline(
                [(1652.5875, -95.349679657), (1651.529164065, -95.378138541), (1650.470830734, -95.406512136), (1649.4125, -95.434799369)],
                knots=[0.68594206, 0.68594206, 0.68594206, 0.68594206, 0.688048735, 0.688048735, 0.688048735, 0.688048735], degree=3))
        make_face()
        with BuildLine():
            Line((1471.6125, -99.161176944), (1471.6125, -105.489537584))
            Line((1471.6125, -105.489537584), (1474.7875, -105.489537584))
            Line((1474.7875, -105.489537584), (1474.7875, -99.117630423))
            add(Edge.make_bspline(
                [(1474.7875, -99.117630423), (1473.729158832, -99.132324193), (1472.670825431, -99.146840459), (1471.6125, -99.161176944)],
                knots=[0.567950133, 0.567950133, 0.567950133, 0.567950133, 0.570057648, 0.570057648, 0.570057648, 0.570057648], degree=3))
        make_face()
        with BuildLine():
            Line((1293.8125, -99.83749143), (1293.8125, -106.18749143))
            Line((1293.8125, -106.18749143), (1296.9875, -106.18749143))
            Line((1296.9875, -106.18749143), (1296.9875, -99.851512251))
            add(Edge.make_bspline(
                [(1296.9875, -99.851512251), (1295.929186903, -99.846935009), (1294.87085368, -99.842259989), (1293.8125, -99.83749143)],
                knots=[0.449944799, 0.449944799, 0.449944799, 0.449944799, 0.452050611, 0.452050611, 0.452050611, 0.452050611], degree=3))
        make_face()
        with BuildLine():
            Line((1116.0125, -98.877614065), (1116.0125, -105.232528283))
            Line((1116.0125, -105.232528283), (1119.1875, -105.232528283))
            Line((1119.1875, -105.232528283), (1119.1875, -98.887560686))
            add(Edge.make_bspline(
                [(1119.1875, -98.887560686), (1118.129164273, -98.884166533), (1117.07083061, -98.880850623), (1116.0125, -98.877614065)],
                knots=[0.332139046, 0.332139046, 0.332139046, 0.332139046, 0.334241398, 0.334241398, 0.334241398, 0.334241398], degree=3))
        make_face()
        with BuildLine():
            Line((823.9125, -98.777475421), (823.9125, -105.127430466))
            Line((823.9125, -105.127430466), (827.0875, -105.127430466))
            Line((827.0875, -105.127430466), (827.0875, -98.777412477))
            add(Edge.make_bspline(
                [(827.0875, -98.777412477), (826.029176824, -98.777415639), (824.97084358, -98.777436304), (823.9125, -98.777475421)],
                knots=[0.138607063, 0.138607063, 0.138607063, 0.138607063, 0.140710549, 0.140710549, 0.140710549, 0.140710549], degree=3))
        make_face()
        with BuildLine():
            Line((608.0125, -99.04838129), (608.0125, -105.400261054))
            Line((608.0125, -105.400261054), (611.1875, -105.400261054))
            Line((611.1875, -105.400261054), (611.1875, -99.051996207))
            add(Edge.make_bspline(
                [(611.1875, -99.051996207), (610.129167277, -99.050888003), (609.070835183, -99.049682312), (608.0125, -99.04838129)],
                knots=[0.899838455, 0.899838455, 0.899838455, 0.899838455, 0.947037247, 0.947037247, 0.947037247, 0.947037247], degree=3))
        make_face()
        with BuildLine():
            Line((242.8875, -105.135594032), (242.8875, -98.785594032))
            add(Edge.make_bspline(
                [(242.8875, -98.785594032), (241.828921211, -98.652522157), (240.770561473, -98.516544317), (239.7125, -98.37771481)],
                knots=[0.923143429, 0.923143429, 0.923143429, 0.923143429, 0.939344476, 0.939344476, 0.939344476, 0.939344476], degree=3))
            Line((239.7125, -98.37771481), (239.7125, -105.135594032))
            Line((239.7125, -105.135594032), (242.8875, -105.135594032))
        make_face()
    extrude(amount=-CUT_EXTRUDE1_DEPTH, mode=Mode.SUBTRACT)

    # Sketch3 → Cut-Extrude2 (cut)
    with BuildSketch(Plane(origin=(0, 1.5875, 0), x_dir=(1, 0, 0), z_dir=(0, 1, 0))):
        Polygon((476.797041743, -98.849097611), (476.797041743, 40.917218584), (2972.510848893, 148.094696625), (2617.465456777, -477.099950745), (476.797041743, -122.958691564), (476.797041743, -114.089259739), (483.581134609, -109.807059007), (478.528826473, -106.937874617), (484.630988809, -103.297962968), align=None)
    extrude(amount=-CUT_EXTRUDE2_DEPTH, mode=Mode.SUBTRACT)


solid = part.part
